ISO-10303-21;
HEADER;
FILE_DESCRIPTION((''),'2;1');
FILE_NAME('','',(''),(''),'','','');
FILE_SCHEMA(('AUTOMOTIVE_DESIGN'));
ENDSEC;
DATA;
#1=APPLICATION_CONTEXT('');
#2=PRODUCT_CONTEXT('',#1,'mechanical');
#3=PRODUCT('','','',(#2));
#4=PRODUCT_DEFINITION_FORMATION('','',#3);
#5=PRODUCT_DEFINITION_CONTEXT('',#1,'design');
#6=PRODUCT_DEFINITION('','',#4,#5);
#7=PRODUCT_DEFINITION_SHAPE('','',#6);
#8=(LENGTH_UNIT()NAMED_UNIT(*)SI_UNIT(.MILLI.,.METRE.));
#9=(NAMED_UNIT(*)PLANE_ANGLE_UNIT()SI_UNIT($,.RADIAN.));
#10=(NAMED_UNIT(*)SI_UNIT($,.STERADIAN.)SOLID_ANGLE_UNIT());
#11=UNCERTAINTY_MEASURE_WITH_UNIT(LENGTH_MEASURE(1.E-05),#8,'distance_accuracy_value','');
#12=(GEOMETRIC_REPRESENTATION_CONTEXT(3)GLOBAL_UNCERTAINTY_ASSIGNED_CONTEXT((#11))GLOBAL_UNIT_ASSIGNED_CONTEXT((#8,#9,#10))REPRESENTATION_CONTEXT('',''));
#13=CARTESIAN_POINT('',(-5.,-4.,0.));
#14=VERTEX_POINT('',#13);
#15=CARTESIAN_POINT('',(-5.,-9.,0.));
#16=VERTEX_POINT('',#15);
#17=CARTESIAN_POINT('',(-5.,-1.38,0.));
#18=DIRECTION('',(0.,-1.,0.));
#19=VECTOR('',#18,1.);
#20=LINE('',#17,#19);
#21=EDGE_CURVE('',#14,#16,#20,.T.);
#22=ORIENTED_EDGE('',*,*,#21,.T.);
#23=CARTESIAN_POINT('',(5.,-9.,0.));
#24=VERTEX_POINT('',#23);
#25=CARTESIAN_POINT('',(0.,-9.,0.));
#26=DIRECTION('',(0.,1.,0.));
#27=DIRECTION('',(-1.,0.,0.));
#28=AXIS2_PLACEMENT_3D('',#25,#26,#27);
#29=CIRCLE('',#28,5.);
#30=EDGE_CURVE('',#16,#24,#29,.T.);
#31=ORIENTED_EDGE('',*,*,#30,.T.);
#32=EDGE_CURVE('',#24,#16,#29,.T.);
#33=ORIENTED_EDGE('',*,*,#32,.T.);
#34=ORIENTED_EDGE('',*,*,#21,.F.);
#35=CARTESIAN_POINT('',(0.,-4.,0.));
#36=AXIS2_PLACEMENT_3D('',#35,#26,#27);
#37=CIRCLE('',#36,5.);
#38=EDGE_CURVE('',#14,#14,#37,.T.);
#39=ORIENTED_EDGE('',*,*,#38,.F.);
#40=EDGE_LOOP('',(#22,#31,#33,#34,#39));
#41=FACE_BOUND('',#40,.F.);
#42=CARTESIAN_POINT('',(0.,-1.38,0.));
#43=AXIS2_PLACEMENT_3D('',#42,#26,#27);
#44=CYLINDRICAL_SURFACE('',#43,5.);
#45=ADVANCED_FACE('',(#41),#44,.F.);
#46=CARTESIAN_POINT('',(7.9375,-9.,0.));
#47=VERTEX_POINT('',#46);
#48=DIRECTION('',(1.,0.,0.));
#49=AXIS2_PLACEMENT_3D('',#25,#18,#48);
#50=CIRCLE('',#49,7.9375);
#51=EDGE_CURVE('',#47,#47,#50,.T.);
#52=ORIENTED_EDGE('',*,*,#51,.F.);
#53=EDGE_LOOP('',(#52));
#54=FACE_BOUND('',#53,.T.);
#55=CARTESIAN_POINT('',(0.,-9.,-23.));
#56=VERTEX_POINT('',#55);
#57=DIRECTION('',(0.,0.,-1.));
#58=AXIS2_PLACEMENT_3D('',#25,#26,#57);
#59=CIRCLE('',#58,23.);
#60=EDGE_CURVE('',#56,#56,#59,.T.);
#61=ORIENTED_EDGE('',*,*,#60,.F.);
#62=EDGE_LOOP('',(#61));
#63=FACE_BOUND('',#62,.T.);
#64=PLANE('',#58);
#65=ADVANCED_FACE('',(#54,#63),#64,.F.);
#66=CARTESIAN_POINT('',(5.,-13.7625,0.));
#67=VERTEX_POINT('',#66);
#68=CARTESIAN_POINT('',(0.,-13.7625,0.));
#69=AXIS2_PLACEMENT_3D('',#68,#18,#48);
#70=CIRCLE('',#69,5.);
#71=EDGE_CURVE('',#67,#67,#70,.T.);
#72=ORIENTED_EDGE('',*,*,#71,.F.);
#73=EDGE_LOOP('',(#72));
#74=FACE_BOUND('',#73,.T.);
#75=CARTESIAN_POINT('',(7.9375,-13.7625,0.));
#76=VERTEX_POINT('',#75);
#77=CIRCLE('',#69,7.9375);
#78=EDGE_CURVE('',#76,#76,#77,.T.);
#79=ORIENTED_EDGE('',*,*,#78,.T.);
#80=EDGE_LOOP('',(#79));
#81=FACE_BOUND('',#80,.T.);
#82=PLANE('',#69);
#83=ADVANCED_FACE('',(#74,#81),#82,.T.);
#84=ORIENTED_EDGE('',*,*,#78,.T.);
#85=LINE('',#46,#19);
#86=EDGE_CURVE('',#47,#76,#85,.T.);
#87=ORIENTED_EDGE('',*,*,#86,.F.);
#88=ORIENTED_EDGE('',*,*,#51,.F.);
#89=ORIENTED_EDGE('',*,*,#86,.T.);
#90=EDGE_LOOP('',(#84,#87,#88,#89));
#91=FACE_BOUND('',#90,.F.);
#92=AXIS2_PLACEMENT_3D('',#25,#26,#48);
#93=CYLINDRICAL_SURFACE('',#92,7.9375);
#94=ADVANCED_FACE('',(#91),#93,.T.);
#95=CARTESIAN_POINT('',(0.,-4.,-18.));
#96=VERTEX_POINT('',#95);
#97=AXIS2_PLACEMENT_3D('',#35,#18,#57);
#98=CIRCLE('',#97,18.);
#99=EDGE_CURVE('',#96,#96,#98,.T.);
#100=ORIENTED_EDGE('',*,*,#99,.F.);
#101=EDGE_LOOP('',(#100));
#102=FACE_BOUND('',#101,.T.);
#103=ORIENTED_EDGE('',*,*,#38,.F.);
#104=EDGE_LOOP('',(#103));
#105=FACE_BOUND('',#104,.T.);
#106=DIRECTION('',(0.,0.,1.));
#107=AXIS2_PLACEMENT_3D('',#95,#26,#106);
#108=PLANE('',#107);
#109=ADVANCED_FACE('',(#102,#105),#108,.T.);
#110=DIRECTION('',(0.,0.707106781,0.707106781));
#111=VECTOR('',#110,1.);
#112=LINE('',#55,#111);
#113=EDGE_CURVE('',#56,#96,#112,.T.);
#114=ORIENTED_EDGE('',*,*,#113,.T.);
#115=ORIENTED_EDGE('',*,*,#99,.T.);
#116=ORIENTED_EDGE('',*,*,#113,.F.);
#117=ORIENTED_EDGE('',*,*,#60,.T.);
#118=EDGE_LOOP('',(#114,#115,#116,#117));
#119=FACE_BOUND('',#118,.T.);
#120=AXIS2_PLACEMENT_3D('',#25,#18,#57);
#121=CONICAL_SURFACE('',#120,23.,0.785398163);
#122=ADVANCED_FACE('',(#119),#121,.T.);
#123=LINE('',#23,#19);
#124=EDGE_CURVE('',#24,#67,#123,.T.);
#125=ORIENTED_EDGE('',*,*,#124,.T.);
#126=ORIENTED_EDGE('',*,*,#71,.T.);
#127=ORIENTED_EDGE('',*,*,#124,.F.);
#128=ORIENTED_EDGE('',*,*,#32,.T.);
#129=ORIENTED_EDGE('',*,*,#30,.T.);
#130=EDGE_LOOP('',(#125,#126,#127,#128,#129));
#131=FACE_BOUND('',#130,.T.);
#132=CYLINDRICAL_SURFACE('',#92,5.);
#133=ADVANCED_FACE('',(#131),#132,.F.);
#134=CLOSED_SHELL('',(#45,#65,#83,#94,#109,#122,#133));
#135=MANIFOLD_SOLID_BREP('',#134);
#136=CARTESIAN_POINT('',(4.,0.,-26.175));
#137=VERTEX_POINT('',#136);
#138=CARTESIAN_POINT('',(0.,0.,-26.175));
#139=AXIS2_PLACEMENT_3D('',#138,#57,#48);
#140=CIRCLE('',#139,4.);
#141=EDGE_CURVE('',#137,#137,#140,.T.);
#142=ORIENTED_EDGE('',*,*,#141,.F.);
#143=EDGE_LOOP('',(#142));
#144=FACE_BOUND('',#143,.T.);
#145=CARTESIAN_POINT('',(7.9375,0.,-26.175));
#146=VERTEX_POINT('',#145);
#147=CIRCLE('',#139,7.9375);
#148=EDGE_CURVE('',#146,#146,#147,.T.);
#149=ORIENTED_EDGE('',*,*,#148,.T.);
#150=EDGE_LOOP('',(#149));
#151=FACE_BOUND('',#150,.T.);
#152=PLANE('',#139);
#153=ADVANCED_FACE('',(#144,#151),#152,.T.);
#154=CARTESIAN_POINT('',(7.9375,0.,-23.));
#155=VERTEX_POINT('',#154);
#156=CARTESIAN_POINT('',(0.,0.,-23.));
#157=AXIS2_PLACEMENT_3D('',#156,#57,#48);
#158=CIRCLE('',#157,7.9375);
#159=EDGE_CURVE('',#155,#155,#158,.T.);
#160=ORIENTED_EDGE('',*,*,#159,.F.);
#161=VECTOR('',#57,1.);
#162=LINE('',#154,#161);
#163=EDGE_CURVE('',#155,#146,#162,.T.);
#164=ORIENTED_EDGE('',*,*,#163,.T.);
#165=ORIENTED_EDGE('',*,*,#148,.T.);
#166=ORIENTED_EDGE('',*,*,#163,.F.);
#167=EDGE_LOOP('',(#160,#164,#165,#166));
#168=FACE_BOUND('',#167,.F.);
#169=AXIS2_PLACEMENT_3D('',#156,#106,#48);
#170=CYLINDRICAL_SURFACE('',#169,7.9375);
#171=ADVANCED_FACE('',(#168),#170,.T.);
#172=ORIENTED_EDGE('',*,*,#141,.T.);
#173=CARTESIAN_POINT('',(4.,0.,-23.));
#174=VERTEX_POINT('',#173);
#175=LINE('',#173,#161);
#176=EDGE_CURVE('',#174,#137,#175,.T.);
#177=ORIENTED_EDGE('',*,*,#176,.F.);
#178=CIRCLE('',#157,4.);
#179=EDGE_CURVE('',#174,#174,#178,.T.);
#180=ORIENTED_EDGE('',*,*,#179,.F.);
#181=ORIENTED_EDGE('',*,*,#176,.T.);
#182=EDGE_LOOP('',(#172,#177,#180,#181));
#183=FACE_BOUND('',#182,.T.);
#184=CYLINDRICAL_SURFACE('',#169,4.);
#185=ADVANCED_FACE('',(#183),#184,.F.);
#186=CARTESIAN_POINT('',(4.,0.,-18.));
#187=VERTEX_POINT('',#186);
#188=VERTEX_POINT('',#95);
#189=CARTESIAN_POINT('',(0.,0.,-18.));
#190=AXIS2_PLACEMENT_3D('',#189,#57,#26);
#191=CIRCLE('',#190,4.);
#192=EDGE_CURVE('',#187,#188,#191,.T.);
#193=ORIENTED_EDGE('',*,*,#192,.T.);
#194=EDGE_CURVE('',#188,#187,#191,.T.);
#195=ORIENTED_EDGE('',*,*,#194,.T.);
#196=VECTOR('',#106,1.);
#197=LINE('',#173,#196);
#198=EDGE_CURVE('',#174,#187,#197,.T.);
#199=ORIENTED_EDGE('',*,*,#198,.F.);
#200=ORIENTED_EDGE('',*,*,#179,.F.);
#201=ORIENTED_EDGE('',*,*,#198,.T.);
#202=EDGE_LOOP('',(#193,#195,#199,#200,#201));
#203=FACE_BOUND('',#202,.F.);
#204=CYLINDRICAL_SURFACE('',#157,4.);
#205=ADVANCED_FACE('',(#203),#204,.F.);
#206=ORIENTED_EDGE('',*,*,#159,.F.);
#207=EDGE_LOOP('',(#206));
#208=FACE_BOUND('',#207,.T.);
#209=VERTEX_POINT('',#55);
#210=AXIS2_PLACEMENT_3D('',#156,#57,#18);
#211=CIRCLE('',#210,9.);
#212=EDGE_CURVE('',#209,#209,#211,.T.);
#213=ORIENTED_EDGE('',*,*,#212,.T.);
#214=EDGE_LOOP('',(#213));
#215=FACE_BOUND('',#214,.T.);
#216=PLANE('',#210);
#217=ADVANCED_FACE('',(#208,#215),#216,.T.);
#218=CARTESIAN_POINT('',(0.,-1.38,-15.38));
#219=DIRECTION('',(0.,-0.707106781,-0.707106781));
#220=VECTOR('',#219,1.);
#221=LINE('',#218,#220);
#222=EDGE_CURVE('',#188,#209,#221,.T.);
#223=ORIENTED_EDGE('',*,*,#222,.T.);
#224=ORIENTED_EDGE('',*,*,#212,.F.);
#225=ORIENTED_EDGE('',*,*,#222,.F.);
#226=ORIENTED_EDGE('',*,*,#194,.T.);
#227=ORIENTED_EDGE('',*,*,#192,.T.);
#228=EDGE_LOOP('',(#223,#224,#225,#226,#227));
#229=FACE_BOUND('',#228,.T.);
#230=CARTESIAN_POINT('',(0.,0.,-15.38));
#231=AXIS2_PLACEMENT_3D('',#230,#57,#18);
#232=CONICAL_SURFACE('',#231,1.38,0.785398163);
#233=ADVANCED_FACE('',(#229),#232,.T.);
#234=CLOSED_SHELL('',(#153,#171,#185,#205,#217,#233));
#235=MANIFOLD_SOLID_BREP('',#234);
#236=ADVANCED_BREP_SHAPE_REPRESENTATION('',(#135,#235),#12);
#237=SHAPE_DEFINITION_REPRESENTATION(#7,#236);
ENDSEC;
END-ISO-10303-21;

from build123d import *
from build123d import SkipClean  # not in build123d's __all__

# Parameters (mm, degrees)
F3_R          = 5
F4_DEPTH      = 7.621
F5_R          = 4
F6_DEPTH      = 46.001
F7_W          = 8
F7_H          = 36
F8_DEPTH      = 23.0010001
F8_DEPTH_BACK = 23.0010001
F9_R          = 7.9375
F9_R_2        = 4
F10_DEPTH     = 3.175
F11_R         = 7.9375
F11_R_2       = 5
F12_DEPTH     = 4.7625


with BuildPart() as f1:
    # F0 (on Right) → F1 (revolve)
    with BuildSketch(Plane.YZ):
        Polygon((-1.38, 0), (-9, 0), (-9, -23), (-1.38, -15.38), align=None)
    revolve(axis=Axis((0, -5.19, 0), (0, 1, 0)))

    # F3 (on face) → F4 (cut, through all)
    with BuildSketch(Plane(origin=(0, -1.38, 0), x_dir=(-1, 0, 0), z_dir=(0, 1, 0))):
        Circle(F3_R)
    extrude(amount=-F4_DEPTH, mode=Mode.SUBTRACT)


with BuildPart() as f2:
    # F0 (on Right) → F2 (revolve)
    with BuildSketch(Plane.YZ):
        Polygon((-1.38, -15.38), (-9, -23), (0, -23), (0, -15.38), align=None)
    revolve(axis=Axis((0, 0, -19.19), (0, 0, -1)))


with BuildPart() as f6_tool:
    # F5 (on face) → F6 (new body, through all)
    with BuildSketch(Plane(origin=(0, 0, -23), x_dir=(1, 0, 0), z_dir=(0, 0, -1))):
        Circle(F5_R)
    extrude(amount=-F6_DEPTH)


with BuildPart() as f1_1:
    add(f1.part, clean=False)

    # F6: cut by f6_tool
    add(f6_tool.part, mode=Mode.SUBTRACT)

    # F7 (on Right) → F8 (cut, two sides)
    with BuildSketch(Plane.YZ) as f8_sk:
        Rectangle(F7_W, F7_H)
    extrude(amount=-F8_DEPTH, mode=Mode.SUBTRACT)
    extrude(f8_sk.sketch, amount=F8_DEPTH_BACK, mode=Mode.SUBTRACT)

    # F11 (on face) → F12 (join)
    with BuildSketch(Plane.XZ.offset(9)):
        Circle(F11_R)
        Circle(F11_R_2, mode=Mode.SUBTRACT)
    with SkipClean():  # cleaning this boolean's faces spoils the solid; the shape is the same uncleaned
        extrude(amount=F12_DEPTH)


with BuildPart() as f2_1:
    add(f2.part, clean=False)

    # F6: cut by f6_tool
    add(f6_tool.part, mode=Mode.SUBTRACT)

    # F9 (on face) → F10 (join)
    with BuildSketch(Plane(origin=(0, 0, -23), x_dir=(1, 0, 0), z_dir=(0, 0, -1))):
        Circle(F9_R)
        Circle(F9_R_2, mode=Mode.SUBTRACT)
    extrude(amount=F10_DEPTH)


solid = Compound([f1_1.part, f2_1.part])
